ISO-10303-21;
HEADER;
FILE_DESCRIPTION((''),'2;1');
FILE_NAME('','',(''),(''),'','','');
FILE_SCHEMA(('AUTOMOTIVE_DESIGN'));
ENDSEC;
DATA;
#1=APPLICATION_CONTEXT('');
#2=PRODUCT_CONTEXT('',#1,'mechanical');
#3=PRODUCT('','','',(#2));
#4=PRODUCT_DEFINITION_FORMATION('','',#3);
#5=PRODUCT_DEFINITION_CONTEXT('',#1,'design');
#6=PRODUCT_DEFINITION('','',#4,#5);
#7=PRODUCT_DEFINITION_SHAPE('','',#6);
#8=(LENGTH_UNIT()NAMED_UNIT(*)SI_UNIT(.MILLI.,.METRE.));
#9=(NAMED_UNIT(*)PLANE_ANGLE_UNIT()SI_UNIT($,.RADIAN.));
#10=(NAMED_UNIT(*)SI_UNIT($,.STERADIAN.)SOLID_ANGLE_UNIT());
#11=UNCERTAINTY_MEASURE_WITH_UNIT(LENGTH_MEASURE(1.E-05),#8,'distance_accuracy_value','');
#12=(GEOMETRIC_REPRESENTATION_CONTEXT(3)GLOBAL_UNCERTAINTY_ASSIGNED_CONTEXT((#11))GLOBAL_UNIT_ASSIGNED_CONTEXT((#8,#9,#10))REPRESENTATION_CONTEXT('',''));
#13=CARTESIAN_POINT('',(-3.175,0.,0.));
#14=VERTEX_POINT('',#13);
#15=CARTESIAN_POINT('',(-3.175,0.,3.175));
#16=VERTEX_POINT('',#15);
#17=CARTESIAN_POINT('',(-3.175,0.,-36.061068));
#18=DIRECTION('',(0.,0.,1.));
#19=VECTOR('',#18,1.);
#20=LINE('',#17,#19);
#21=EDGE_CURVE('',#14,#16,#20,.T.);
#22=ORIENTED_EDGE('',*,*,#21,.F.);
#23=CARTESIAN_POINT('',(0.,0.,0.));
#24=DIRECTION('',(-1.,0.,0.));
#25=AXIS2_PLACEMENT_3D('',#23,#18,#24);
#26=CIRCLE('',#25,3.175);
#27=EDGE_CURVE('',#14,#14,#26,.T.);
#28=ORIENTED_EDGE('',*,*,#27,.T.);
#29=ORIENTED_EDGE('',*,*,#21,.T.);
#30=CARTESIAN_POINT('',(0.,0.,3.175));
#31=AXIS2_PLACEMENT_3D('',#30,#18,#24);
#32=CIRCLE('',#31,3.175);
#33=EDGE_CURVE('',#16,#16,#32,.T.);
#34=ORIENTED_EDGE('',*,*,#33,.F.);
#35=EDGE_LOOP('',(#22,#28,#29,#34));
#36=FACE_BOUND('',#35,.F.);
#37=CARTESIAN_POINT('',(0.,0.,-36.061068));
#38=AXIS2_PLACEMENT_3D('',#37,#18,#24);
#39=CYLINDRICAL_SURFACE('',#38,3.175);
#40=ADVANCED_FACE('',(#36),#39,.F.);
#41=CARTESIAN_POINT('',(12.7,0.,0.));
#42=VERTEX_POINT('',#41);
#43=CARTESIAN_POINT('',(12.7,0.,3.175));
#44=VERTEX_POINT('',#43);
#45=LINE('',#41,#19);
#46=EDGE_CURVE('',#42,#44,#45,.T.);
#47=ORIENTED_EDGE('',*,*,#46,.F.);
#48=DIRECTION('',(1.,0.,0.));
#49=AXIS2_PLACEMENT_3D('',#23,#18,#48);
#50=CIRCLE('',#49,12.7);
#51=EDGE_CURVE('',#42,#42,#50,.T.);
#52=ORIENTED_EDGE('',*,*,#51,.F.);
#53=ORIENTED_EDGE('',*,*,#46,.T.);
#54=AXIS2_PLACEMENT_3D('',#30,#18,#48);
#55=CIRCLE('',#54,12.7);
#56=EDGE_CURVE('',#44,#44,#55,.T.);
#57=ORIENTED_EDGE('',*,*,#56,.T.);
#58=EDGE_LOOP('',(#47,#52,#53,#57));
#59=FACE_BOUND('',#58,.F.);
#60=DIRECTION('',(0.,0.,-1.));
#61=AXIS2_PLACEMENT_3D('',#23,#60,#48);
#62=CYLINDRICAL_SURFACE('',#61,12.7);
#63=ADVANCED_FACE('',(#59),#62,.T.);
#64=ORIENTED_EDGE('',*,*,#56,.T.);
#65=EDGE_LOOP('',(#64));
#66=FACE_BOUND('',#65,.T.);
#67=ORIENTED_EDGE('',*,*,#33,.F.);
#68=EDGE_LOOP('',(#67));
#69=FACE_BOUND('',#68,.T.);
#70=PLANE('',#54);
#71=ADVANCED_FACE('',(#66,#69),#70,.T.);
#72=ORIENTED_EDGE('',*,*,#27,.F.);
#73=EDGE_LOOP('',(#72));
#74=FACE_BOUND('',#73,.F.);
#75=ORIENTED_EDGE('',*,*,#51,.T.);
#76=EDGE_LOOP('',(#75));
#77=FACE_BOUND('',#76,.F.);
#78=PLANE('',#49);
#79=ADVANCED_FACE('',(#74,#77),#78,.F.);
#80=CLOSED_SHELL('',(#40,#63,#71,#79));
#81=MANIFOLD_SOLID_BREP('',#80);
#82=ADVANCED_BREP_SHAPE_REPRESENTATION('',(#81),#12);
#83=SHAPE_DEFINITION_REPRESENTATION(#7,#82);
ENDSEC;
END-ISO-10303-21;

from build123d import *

# Parameters (mm, degrees)
F2_R     = 12.7
F3_DEPTH = 3.175
F4_D     = 6.35


# Not quite as in the source:
# - a variable given as a bare number and used for a length is read in inches; the dataset says mm whatever the document's units were


with BuildPart() as f3:
    # F2 (on Top) → F3 (new body)
    with BuildSketch(Plane.XY):
        Circle(F2_R)
    extrude(amount=F3_DEPTH)

    # F4 (through all)
    with Locations(Plane(origin=(0, 0, 0), x_dir=(1, 0, 0), z_dir=(0, 0, -1))):
        with Locations((0, 0)):
            Hole(F4_D / 2)


solid = f3.part
